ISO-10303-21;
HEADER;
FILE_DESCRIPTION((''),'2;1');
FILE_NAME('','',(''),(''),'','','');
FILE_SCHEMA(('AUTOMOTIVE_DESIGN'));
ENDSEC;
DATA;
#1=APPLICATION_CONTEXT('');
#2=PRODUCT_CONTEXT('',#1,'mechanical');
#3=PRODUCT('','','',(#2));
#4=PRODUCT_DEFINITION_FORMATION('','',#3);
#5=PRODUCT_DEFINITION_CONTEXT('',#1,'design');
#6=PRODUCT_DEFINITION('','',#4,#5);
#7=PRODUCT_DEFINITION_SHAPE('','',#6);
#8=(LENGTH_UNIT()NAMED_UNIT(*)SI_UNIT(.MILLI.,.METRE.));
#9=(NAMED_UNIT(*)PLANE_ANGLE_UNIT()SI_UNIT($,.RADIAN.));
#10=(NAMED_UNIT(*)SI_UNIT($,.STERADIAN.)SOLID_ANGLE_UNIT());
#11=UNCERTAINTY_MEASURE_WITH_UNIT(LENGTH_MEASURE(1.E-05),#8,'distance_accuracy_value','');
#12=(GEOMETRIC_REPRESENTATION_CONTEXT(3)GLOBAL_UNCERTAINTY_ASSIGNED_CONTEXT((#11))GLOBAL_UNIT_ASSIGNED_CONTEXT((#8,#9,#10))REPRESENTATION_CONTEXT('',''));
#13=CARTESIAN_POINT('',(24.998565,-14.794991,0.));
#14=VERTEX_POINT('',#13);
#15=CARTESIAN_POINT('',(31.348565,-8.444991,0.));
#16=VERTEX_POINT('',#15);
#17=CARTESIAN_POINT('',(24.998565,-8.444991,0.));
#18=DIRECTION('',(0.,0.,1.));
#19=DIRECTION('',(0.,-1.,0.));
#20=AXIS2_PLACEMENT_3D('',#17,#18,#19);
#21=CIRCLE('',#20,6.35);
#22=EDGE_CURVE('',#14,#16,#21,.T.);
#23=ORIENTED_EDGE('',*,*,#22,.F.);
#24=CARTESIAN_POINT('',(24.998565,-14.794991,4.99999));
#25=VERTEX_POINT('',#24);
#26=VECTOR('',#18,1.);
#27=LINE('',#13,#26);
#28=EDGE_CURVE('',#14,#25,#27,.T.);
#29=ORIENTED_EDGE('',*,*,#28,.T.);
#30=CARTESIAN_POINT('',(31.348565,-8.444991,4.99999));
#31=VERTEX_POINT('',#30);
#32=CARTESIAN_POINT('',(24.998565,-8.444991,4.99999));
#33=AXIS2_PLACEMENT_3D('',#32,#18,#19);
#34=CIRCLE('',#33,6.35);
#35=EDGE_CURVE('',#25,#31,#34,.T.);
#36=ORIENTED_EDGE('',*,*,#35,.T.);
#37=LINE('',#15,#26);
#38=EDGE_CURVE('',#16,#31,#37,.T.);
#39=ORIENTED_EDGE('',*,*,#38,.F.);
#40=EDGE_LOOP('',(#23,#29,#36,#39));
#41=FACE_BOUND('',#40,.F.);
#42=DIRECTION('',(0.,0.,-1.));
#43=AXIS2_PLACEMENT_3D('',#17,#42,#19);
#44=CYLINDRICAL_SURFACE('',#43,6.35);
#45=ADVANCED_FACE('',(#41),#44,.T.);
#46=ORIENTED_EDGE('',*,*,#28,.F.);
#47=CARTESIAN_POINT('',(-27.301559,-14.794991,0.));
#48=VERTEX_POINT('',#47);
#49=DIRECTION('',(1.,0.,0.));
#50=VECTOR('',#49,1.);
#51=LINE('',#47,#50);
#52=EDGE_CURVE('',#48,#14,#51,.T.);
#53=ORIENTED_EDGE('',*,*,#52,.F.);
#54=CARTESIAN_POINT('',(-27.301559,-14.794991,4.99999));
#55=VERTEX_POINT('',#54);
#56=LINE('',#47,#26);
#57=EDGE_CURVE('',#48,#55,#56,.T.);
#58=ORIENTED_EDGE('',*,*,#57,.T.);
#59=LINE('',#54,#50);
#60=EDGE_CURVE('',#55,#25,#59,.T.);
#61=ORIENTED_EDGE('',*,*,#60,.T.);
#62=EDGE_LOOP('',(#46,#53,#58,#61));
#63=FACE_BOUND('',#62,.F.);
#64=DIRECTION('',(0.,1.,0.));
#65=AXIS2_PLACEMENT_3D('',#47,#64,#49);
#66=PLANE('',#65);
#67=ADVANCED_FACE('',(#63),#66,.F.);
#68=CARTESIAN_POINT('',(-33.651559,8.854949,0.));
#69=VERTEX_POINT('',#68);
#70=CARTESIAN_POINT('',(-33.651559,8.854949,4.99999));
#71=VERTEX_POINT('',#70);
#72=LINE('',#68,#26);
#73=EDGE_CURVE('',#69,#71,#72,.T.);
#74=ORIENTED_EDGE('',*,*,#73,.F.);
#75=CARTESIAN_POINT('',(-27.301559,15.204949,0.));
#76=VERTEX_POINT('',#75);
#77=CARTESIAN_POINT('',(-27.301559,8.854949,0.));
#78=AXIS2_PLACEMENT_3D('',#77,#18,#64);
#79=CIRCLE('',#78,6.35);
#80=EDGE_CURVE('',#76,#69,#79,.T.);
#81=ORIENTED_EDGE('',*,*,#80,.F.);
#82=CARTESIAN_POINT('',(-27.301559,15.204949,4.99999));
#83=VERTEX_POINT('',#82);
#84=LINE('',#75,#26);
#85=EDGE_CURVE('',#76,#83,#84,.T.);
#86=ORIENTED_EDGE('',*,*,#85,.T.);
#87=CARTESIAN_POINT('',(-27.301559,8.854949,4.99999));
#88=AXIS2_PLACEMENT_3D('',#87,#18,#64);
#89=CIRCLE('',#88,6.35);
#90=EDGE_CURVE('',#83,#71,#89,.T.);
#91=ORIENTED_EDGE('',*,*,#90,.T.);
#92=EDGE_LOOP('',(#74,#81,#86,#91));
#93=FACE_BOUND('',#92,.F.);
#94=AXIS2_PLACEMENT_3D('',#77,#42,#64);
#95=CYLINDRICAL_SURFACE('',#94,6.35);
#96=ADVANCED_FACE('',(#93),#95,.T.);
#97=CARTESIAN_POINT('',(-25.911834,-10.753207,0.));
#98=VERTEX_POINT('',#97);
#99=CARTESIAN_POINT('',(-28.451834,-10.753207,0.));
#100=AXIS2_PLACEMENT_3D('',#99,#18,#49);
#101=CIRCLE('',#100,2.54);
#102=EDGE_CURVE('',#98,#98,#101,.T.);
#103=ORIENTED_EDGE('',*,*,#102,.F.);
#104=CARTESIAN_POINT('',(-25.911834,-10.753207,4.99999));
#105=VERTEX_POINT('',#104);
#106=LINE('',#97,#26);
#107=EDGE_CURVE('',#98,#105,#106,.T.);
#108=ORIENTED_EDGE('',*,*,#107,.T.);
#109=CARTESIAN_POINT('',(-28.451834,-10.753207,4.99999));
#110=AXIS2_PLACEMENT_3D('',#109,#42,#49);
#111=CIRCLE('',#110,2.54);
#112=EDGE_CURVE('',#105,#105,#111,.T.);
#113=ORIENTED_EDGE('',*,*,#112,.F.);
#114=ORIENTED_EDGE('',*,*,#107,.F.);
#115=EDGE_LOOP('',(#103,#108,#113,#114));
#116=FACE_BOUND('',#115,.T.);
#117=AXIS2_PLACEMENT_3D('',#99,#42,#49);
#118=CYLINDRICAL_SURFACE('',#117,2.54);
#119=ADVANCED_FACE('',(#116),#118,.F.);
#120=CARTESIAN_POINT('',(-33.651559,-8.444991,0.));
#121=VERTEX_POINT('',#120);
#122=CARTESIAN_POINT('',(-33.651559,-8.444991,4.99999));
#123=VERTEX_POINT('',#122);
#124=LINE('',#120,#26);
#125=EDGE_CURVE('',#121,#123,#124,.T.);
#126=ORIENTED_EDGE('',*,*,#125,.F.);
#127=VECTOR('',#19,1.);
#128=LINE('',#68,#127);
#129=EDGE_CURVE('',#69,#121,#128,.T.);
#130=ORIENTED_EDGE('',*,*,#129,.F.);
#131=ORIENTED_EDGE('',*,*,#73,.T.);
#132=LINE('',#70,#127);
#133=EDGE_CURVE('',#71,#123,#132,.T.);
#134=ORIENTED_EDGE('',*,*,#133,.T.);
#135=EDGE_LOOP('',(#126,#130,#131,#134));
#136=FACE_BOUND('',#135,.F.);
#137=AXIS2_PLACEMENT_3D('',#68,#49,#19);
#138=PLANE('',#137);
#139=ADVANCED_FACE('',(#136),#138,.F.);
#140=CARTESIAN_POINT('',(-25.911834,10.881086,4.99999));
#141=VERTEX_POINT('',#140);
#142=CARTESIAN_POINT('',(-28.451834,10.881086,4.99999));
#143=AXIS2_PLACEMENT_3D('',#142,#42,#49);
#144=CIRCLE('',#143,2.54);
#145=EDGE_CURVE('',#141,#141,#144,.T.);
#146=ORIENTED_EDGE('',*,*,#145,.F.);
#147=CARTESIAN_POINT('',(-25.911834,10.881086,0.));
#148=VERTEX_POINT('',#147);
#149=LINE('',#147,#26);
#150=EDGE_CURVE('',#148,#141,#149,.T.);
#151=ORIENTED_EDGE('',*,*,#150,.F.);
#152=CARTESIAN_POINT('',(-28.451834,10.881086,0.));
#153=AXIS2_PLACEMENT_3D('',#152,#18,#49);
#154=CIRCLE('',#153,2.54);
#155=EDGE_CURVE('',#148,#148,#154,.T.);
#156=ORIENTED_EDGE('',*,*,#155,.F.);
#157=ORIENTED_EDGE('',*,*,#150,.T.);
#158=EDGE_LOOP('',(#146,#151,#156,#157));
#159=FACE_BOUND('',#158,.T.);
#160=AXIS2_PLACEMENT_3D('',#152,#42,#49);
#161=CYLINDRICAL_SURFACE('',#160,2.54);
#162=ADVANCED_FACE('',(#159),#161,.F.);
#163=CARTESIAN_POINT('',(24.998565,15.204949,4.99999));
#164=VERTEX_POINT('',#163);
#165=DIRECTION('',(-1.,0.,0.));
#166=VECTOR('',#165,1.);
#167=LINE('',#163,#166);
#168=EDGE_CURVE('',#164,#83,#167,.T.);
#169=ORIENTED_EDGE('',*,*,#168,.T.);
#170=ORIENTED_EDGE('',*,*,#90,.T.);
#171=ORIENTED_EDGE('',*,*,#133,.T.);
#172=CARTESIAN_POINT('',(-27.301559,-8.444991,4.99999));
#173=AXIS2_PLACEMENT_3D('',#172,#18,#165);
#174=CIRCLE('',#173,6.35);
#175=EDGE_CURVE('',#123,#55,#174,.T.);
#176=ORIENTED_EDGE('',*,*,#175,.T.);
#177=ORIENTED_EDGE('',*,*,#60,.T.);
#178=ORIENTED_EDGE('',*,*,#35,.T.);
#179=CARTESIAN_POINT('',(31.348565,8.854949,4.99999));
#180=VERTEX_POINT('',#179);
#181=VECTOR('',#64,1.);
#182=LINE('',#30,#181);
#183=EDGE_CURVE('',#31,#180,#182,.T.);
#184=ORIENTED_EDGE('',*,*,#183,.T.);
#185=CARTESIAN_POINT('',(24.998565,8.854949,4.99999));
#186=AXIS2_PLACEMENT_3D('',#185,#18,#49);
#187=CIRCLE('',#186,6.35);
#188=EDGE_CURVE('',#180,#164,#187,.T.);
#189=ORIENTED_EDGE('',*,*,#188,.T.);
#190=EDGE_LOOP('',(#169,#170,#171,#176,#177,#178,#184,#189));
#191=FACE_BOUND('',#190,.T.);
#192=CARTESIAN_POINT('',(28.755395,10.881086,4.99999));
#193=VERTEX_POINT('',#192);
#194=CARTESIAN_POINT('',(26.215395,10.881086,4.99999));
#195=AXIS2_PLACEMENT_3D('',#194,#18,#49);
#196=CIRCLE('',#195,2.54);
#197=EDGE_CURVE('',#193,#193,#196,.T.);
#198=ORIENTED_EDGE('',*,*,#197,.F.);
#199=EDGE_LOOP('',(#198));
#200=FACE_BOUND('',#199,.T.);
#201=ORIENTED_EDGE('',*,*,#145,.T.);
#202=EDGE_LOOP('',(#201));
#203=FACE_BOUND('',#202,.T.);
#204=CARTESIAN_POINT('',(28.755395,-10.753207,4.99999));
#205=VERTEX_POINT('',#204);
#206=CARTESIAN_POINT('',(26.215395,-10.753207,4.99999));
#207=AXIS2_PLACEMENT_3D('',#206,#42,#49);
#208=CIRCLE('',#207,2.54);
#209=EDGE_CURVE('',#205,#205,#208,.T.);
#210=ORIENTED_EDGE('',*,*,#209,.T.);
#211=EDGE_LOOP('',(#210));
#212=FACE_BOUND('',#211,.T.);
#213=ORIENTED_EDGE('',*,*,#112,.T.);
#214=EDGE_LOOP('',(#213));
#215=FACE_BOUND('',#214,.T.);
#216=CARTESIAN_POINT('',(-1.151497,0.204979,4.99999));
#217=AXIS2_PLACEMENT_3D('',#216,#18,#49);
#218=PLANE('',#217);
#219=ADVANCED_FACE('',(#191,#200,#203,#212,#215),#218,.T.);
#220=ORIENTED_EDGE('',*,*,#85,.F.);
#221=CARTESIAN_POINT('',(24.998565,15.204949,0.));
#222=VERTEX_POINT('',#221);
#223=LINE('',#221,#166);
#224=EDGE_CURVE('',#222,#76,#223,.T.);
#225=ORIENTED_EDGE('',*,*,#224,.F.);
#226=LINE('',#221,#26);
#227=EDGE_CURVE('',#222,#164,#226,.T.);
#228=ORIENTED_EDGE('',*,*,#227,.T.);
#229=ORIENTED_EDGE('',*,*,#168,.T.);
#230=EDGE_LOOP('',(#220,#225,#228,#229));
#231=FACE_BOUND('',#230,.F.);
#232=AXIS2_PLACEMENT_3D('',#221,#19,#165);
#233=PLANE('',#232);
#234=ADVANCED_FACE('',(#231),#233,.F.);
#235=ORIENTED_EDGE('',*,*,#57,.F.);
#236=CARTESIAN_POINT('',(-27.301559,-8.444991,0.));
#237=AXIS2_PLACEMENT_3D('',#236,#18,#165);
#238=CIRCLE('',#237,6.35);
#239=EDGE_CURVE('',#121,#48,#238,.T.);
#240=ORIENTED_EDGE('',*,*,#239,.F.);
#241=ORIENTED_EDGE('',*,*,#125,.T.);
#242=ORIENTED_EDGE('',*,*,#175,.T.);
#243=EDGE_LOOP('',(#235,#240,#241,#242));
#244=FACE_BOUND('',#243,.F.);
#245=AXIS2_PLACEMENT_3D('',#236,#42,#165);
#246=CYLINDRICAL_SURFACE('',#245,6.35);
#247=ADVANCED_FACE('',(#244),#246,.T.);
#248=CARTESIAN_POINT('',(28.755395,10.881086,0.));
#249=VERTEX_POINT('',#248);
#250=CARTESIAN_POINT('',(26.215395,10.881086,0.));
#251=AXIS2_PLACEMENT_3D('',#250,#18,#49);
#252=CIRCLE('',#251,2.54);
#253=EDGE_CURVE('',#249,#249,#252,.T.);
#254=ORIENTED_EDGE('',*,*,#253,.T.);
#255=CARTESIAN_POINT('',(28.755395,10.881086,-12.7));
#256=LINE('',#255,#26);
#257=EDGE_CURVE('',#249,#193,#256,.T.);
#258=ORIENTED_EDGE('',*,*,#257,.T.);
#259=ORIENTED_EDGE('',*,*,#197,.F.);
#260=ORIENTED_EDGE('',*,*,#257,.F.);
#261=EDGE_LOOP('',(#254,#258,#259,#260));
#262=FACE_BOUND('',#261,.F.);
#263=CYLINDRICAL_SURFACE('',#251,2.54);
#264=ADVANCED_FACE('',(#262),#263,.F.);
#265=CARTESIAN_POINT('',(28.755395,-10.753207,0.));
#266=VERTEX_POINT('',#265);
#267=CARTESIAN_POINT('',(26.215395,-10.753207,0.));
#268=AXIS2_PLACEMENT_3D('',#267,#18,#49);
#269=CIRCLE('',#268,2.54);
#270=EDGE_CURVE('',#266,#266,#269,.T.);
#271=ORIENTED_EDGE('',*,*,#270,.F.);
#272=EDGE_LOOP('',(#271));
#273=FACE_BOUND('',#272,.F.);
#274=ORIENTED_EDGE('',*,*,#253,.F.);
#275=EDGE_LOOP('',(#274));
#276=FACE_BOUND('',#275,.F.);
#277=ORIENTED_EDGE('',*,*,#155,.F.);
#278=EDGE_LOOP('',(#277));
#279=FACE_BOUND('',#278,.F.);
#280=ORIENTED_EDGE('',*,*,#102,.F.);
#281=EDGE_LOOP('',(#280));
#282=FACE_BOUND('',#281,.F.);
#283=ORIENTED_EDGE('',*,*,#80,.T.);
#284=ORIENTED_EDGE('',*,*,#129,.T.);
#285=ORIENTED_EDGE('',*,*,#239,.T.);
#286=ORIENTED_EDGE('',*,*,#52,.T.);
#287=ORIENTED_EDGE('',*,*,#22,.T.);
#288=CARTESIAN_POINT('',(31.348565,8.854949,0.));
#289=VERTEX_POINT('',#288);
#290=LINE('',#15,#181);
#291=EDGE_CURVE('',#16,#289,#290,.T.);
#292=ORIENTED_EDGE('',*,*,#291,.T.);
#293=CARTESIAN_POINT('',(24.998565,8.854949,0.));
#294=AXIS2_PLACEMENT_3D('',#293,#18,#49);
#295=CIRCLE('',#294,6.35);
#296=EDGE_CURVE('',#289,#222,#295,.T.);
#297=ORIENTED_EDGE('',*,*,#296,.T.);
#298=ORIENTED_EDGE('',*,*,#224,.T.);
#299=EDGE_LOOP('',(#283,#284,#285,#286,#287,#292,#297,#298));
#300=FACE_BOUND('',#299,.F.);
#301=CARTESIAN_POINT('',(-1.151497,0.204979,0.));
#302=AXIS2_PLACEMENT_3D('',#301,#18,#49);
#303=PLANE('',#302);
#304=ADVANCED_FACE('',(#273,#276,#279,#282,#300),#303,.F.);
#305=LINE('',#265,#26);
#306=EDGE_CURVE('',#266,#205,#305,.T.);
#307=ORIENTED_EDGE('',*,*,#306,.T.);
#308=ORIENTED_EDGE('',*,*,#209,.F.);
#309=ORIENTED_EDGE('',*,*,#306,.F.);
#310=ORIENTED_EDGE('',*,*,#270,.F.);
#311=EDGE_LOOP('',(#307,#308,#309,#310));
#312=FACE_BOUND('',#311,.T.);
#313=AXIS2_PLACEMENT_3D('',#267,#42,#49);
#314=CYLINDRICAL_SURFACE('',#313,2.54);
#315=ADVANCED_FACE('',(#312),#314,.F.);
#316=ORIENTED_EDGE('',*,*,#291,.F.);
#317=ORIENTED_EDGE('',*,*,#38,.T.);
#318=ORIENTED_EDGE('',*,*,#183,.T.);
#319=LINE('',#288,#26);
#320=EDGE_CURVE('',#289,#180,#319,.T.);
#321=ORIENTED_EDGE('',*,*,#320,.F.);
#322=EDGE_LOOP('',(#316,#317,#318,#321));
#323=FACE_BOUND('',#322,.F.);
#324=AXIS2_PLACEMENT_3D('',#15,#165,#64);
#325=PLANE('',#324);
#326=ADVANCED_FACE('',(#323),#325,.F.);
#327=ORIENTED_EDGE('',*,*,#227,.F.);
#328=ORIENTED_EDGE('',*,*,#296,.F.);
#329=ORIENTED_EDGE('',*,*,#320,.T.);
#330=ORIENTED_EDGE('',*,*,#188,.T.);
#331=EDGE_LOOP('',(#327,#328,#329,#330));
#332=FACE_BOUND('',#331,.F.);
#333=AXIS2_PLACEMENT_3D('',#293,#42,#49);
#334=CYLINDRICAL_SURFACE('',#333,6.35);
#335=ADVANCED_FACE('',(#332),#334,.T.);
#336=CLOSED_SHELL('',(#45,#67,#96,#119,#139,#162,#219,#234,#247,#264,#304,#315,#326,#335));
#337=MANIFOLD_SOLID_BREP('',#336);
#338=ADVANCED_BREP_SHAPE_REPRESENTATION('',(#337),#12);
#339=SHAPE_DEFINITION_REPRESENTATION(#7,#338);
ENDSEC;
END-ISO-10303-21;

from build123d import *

# Parameters (mm, degrees)
F1_DEPTH = 4.99999
F2_R     = 2.54
F3_DEPTH = 12.7


# Not quite as in the source:
# - the program builds the solid bodies; features that only make, move or delete a surface that nothing else refers to are left out


with BuildPart() as f1:
    # F0 (on Top) → F1 (new body)
    with BuildSketch(Plane.XY):
        with BuildLine():
            Line((24.9985645242, 15.2049488522), (-27.3015594758, 15.2049488522))
            ThreePointArc((-27.3015594758, 15.2049488522), (-31.7916875363, 13.3450769127), (-33.6515594758, 8.8549488522))
            Line((-33.6515594758, 8.8549488522), (-33.6515594758, -8.4449911478))
            ThreePointArc((-33.6515594758, -8.4449911478), (-31.7916875363, -12.9351192083), (-27.3015594758, -14.7949911478))
            Line((-27.3015594758, -14.7949911478), (24.9985645242, -14.7949911478))
            ThreePointArc((24.9985645242, -14.7949911478), (29.4886925847, -12.9351192083), (31.3485645242, -8.4449911478))
            Line((31.3485645242, -8.4449911478), (31.3485645242, 8.8549488522))
            ThreePointArc((31.3485645242, 8.8549488522), (29.4886925847, 13.3450769127), (24.9985645242, 15.2049488522))
        make_face()
    extrude(amount=F1_DEPTH)

    # F2 (on Top) → F3 (cut, symmetric)
    with BuildSketch(Plane.XY):
        with Locations((-28.451833874, 10.8810858801)):
            Circle(F2_R)
        with Locations((-28.451833874, -10.7532069087)):
            Circle(F2_R)
        with Locations((26.2153949589, -10.7532069087)):
            Circle(F2_R)
        with Locations((26.2153949589, 10.8810858801)):
            Circle(F2_R)
    extrude(amount=F3_DEPTH, both=True, mode=Mode.SUBTRACT)


solid = f1.part
